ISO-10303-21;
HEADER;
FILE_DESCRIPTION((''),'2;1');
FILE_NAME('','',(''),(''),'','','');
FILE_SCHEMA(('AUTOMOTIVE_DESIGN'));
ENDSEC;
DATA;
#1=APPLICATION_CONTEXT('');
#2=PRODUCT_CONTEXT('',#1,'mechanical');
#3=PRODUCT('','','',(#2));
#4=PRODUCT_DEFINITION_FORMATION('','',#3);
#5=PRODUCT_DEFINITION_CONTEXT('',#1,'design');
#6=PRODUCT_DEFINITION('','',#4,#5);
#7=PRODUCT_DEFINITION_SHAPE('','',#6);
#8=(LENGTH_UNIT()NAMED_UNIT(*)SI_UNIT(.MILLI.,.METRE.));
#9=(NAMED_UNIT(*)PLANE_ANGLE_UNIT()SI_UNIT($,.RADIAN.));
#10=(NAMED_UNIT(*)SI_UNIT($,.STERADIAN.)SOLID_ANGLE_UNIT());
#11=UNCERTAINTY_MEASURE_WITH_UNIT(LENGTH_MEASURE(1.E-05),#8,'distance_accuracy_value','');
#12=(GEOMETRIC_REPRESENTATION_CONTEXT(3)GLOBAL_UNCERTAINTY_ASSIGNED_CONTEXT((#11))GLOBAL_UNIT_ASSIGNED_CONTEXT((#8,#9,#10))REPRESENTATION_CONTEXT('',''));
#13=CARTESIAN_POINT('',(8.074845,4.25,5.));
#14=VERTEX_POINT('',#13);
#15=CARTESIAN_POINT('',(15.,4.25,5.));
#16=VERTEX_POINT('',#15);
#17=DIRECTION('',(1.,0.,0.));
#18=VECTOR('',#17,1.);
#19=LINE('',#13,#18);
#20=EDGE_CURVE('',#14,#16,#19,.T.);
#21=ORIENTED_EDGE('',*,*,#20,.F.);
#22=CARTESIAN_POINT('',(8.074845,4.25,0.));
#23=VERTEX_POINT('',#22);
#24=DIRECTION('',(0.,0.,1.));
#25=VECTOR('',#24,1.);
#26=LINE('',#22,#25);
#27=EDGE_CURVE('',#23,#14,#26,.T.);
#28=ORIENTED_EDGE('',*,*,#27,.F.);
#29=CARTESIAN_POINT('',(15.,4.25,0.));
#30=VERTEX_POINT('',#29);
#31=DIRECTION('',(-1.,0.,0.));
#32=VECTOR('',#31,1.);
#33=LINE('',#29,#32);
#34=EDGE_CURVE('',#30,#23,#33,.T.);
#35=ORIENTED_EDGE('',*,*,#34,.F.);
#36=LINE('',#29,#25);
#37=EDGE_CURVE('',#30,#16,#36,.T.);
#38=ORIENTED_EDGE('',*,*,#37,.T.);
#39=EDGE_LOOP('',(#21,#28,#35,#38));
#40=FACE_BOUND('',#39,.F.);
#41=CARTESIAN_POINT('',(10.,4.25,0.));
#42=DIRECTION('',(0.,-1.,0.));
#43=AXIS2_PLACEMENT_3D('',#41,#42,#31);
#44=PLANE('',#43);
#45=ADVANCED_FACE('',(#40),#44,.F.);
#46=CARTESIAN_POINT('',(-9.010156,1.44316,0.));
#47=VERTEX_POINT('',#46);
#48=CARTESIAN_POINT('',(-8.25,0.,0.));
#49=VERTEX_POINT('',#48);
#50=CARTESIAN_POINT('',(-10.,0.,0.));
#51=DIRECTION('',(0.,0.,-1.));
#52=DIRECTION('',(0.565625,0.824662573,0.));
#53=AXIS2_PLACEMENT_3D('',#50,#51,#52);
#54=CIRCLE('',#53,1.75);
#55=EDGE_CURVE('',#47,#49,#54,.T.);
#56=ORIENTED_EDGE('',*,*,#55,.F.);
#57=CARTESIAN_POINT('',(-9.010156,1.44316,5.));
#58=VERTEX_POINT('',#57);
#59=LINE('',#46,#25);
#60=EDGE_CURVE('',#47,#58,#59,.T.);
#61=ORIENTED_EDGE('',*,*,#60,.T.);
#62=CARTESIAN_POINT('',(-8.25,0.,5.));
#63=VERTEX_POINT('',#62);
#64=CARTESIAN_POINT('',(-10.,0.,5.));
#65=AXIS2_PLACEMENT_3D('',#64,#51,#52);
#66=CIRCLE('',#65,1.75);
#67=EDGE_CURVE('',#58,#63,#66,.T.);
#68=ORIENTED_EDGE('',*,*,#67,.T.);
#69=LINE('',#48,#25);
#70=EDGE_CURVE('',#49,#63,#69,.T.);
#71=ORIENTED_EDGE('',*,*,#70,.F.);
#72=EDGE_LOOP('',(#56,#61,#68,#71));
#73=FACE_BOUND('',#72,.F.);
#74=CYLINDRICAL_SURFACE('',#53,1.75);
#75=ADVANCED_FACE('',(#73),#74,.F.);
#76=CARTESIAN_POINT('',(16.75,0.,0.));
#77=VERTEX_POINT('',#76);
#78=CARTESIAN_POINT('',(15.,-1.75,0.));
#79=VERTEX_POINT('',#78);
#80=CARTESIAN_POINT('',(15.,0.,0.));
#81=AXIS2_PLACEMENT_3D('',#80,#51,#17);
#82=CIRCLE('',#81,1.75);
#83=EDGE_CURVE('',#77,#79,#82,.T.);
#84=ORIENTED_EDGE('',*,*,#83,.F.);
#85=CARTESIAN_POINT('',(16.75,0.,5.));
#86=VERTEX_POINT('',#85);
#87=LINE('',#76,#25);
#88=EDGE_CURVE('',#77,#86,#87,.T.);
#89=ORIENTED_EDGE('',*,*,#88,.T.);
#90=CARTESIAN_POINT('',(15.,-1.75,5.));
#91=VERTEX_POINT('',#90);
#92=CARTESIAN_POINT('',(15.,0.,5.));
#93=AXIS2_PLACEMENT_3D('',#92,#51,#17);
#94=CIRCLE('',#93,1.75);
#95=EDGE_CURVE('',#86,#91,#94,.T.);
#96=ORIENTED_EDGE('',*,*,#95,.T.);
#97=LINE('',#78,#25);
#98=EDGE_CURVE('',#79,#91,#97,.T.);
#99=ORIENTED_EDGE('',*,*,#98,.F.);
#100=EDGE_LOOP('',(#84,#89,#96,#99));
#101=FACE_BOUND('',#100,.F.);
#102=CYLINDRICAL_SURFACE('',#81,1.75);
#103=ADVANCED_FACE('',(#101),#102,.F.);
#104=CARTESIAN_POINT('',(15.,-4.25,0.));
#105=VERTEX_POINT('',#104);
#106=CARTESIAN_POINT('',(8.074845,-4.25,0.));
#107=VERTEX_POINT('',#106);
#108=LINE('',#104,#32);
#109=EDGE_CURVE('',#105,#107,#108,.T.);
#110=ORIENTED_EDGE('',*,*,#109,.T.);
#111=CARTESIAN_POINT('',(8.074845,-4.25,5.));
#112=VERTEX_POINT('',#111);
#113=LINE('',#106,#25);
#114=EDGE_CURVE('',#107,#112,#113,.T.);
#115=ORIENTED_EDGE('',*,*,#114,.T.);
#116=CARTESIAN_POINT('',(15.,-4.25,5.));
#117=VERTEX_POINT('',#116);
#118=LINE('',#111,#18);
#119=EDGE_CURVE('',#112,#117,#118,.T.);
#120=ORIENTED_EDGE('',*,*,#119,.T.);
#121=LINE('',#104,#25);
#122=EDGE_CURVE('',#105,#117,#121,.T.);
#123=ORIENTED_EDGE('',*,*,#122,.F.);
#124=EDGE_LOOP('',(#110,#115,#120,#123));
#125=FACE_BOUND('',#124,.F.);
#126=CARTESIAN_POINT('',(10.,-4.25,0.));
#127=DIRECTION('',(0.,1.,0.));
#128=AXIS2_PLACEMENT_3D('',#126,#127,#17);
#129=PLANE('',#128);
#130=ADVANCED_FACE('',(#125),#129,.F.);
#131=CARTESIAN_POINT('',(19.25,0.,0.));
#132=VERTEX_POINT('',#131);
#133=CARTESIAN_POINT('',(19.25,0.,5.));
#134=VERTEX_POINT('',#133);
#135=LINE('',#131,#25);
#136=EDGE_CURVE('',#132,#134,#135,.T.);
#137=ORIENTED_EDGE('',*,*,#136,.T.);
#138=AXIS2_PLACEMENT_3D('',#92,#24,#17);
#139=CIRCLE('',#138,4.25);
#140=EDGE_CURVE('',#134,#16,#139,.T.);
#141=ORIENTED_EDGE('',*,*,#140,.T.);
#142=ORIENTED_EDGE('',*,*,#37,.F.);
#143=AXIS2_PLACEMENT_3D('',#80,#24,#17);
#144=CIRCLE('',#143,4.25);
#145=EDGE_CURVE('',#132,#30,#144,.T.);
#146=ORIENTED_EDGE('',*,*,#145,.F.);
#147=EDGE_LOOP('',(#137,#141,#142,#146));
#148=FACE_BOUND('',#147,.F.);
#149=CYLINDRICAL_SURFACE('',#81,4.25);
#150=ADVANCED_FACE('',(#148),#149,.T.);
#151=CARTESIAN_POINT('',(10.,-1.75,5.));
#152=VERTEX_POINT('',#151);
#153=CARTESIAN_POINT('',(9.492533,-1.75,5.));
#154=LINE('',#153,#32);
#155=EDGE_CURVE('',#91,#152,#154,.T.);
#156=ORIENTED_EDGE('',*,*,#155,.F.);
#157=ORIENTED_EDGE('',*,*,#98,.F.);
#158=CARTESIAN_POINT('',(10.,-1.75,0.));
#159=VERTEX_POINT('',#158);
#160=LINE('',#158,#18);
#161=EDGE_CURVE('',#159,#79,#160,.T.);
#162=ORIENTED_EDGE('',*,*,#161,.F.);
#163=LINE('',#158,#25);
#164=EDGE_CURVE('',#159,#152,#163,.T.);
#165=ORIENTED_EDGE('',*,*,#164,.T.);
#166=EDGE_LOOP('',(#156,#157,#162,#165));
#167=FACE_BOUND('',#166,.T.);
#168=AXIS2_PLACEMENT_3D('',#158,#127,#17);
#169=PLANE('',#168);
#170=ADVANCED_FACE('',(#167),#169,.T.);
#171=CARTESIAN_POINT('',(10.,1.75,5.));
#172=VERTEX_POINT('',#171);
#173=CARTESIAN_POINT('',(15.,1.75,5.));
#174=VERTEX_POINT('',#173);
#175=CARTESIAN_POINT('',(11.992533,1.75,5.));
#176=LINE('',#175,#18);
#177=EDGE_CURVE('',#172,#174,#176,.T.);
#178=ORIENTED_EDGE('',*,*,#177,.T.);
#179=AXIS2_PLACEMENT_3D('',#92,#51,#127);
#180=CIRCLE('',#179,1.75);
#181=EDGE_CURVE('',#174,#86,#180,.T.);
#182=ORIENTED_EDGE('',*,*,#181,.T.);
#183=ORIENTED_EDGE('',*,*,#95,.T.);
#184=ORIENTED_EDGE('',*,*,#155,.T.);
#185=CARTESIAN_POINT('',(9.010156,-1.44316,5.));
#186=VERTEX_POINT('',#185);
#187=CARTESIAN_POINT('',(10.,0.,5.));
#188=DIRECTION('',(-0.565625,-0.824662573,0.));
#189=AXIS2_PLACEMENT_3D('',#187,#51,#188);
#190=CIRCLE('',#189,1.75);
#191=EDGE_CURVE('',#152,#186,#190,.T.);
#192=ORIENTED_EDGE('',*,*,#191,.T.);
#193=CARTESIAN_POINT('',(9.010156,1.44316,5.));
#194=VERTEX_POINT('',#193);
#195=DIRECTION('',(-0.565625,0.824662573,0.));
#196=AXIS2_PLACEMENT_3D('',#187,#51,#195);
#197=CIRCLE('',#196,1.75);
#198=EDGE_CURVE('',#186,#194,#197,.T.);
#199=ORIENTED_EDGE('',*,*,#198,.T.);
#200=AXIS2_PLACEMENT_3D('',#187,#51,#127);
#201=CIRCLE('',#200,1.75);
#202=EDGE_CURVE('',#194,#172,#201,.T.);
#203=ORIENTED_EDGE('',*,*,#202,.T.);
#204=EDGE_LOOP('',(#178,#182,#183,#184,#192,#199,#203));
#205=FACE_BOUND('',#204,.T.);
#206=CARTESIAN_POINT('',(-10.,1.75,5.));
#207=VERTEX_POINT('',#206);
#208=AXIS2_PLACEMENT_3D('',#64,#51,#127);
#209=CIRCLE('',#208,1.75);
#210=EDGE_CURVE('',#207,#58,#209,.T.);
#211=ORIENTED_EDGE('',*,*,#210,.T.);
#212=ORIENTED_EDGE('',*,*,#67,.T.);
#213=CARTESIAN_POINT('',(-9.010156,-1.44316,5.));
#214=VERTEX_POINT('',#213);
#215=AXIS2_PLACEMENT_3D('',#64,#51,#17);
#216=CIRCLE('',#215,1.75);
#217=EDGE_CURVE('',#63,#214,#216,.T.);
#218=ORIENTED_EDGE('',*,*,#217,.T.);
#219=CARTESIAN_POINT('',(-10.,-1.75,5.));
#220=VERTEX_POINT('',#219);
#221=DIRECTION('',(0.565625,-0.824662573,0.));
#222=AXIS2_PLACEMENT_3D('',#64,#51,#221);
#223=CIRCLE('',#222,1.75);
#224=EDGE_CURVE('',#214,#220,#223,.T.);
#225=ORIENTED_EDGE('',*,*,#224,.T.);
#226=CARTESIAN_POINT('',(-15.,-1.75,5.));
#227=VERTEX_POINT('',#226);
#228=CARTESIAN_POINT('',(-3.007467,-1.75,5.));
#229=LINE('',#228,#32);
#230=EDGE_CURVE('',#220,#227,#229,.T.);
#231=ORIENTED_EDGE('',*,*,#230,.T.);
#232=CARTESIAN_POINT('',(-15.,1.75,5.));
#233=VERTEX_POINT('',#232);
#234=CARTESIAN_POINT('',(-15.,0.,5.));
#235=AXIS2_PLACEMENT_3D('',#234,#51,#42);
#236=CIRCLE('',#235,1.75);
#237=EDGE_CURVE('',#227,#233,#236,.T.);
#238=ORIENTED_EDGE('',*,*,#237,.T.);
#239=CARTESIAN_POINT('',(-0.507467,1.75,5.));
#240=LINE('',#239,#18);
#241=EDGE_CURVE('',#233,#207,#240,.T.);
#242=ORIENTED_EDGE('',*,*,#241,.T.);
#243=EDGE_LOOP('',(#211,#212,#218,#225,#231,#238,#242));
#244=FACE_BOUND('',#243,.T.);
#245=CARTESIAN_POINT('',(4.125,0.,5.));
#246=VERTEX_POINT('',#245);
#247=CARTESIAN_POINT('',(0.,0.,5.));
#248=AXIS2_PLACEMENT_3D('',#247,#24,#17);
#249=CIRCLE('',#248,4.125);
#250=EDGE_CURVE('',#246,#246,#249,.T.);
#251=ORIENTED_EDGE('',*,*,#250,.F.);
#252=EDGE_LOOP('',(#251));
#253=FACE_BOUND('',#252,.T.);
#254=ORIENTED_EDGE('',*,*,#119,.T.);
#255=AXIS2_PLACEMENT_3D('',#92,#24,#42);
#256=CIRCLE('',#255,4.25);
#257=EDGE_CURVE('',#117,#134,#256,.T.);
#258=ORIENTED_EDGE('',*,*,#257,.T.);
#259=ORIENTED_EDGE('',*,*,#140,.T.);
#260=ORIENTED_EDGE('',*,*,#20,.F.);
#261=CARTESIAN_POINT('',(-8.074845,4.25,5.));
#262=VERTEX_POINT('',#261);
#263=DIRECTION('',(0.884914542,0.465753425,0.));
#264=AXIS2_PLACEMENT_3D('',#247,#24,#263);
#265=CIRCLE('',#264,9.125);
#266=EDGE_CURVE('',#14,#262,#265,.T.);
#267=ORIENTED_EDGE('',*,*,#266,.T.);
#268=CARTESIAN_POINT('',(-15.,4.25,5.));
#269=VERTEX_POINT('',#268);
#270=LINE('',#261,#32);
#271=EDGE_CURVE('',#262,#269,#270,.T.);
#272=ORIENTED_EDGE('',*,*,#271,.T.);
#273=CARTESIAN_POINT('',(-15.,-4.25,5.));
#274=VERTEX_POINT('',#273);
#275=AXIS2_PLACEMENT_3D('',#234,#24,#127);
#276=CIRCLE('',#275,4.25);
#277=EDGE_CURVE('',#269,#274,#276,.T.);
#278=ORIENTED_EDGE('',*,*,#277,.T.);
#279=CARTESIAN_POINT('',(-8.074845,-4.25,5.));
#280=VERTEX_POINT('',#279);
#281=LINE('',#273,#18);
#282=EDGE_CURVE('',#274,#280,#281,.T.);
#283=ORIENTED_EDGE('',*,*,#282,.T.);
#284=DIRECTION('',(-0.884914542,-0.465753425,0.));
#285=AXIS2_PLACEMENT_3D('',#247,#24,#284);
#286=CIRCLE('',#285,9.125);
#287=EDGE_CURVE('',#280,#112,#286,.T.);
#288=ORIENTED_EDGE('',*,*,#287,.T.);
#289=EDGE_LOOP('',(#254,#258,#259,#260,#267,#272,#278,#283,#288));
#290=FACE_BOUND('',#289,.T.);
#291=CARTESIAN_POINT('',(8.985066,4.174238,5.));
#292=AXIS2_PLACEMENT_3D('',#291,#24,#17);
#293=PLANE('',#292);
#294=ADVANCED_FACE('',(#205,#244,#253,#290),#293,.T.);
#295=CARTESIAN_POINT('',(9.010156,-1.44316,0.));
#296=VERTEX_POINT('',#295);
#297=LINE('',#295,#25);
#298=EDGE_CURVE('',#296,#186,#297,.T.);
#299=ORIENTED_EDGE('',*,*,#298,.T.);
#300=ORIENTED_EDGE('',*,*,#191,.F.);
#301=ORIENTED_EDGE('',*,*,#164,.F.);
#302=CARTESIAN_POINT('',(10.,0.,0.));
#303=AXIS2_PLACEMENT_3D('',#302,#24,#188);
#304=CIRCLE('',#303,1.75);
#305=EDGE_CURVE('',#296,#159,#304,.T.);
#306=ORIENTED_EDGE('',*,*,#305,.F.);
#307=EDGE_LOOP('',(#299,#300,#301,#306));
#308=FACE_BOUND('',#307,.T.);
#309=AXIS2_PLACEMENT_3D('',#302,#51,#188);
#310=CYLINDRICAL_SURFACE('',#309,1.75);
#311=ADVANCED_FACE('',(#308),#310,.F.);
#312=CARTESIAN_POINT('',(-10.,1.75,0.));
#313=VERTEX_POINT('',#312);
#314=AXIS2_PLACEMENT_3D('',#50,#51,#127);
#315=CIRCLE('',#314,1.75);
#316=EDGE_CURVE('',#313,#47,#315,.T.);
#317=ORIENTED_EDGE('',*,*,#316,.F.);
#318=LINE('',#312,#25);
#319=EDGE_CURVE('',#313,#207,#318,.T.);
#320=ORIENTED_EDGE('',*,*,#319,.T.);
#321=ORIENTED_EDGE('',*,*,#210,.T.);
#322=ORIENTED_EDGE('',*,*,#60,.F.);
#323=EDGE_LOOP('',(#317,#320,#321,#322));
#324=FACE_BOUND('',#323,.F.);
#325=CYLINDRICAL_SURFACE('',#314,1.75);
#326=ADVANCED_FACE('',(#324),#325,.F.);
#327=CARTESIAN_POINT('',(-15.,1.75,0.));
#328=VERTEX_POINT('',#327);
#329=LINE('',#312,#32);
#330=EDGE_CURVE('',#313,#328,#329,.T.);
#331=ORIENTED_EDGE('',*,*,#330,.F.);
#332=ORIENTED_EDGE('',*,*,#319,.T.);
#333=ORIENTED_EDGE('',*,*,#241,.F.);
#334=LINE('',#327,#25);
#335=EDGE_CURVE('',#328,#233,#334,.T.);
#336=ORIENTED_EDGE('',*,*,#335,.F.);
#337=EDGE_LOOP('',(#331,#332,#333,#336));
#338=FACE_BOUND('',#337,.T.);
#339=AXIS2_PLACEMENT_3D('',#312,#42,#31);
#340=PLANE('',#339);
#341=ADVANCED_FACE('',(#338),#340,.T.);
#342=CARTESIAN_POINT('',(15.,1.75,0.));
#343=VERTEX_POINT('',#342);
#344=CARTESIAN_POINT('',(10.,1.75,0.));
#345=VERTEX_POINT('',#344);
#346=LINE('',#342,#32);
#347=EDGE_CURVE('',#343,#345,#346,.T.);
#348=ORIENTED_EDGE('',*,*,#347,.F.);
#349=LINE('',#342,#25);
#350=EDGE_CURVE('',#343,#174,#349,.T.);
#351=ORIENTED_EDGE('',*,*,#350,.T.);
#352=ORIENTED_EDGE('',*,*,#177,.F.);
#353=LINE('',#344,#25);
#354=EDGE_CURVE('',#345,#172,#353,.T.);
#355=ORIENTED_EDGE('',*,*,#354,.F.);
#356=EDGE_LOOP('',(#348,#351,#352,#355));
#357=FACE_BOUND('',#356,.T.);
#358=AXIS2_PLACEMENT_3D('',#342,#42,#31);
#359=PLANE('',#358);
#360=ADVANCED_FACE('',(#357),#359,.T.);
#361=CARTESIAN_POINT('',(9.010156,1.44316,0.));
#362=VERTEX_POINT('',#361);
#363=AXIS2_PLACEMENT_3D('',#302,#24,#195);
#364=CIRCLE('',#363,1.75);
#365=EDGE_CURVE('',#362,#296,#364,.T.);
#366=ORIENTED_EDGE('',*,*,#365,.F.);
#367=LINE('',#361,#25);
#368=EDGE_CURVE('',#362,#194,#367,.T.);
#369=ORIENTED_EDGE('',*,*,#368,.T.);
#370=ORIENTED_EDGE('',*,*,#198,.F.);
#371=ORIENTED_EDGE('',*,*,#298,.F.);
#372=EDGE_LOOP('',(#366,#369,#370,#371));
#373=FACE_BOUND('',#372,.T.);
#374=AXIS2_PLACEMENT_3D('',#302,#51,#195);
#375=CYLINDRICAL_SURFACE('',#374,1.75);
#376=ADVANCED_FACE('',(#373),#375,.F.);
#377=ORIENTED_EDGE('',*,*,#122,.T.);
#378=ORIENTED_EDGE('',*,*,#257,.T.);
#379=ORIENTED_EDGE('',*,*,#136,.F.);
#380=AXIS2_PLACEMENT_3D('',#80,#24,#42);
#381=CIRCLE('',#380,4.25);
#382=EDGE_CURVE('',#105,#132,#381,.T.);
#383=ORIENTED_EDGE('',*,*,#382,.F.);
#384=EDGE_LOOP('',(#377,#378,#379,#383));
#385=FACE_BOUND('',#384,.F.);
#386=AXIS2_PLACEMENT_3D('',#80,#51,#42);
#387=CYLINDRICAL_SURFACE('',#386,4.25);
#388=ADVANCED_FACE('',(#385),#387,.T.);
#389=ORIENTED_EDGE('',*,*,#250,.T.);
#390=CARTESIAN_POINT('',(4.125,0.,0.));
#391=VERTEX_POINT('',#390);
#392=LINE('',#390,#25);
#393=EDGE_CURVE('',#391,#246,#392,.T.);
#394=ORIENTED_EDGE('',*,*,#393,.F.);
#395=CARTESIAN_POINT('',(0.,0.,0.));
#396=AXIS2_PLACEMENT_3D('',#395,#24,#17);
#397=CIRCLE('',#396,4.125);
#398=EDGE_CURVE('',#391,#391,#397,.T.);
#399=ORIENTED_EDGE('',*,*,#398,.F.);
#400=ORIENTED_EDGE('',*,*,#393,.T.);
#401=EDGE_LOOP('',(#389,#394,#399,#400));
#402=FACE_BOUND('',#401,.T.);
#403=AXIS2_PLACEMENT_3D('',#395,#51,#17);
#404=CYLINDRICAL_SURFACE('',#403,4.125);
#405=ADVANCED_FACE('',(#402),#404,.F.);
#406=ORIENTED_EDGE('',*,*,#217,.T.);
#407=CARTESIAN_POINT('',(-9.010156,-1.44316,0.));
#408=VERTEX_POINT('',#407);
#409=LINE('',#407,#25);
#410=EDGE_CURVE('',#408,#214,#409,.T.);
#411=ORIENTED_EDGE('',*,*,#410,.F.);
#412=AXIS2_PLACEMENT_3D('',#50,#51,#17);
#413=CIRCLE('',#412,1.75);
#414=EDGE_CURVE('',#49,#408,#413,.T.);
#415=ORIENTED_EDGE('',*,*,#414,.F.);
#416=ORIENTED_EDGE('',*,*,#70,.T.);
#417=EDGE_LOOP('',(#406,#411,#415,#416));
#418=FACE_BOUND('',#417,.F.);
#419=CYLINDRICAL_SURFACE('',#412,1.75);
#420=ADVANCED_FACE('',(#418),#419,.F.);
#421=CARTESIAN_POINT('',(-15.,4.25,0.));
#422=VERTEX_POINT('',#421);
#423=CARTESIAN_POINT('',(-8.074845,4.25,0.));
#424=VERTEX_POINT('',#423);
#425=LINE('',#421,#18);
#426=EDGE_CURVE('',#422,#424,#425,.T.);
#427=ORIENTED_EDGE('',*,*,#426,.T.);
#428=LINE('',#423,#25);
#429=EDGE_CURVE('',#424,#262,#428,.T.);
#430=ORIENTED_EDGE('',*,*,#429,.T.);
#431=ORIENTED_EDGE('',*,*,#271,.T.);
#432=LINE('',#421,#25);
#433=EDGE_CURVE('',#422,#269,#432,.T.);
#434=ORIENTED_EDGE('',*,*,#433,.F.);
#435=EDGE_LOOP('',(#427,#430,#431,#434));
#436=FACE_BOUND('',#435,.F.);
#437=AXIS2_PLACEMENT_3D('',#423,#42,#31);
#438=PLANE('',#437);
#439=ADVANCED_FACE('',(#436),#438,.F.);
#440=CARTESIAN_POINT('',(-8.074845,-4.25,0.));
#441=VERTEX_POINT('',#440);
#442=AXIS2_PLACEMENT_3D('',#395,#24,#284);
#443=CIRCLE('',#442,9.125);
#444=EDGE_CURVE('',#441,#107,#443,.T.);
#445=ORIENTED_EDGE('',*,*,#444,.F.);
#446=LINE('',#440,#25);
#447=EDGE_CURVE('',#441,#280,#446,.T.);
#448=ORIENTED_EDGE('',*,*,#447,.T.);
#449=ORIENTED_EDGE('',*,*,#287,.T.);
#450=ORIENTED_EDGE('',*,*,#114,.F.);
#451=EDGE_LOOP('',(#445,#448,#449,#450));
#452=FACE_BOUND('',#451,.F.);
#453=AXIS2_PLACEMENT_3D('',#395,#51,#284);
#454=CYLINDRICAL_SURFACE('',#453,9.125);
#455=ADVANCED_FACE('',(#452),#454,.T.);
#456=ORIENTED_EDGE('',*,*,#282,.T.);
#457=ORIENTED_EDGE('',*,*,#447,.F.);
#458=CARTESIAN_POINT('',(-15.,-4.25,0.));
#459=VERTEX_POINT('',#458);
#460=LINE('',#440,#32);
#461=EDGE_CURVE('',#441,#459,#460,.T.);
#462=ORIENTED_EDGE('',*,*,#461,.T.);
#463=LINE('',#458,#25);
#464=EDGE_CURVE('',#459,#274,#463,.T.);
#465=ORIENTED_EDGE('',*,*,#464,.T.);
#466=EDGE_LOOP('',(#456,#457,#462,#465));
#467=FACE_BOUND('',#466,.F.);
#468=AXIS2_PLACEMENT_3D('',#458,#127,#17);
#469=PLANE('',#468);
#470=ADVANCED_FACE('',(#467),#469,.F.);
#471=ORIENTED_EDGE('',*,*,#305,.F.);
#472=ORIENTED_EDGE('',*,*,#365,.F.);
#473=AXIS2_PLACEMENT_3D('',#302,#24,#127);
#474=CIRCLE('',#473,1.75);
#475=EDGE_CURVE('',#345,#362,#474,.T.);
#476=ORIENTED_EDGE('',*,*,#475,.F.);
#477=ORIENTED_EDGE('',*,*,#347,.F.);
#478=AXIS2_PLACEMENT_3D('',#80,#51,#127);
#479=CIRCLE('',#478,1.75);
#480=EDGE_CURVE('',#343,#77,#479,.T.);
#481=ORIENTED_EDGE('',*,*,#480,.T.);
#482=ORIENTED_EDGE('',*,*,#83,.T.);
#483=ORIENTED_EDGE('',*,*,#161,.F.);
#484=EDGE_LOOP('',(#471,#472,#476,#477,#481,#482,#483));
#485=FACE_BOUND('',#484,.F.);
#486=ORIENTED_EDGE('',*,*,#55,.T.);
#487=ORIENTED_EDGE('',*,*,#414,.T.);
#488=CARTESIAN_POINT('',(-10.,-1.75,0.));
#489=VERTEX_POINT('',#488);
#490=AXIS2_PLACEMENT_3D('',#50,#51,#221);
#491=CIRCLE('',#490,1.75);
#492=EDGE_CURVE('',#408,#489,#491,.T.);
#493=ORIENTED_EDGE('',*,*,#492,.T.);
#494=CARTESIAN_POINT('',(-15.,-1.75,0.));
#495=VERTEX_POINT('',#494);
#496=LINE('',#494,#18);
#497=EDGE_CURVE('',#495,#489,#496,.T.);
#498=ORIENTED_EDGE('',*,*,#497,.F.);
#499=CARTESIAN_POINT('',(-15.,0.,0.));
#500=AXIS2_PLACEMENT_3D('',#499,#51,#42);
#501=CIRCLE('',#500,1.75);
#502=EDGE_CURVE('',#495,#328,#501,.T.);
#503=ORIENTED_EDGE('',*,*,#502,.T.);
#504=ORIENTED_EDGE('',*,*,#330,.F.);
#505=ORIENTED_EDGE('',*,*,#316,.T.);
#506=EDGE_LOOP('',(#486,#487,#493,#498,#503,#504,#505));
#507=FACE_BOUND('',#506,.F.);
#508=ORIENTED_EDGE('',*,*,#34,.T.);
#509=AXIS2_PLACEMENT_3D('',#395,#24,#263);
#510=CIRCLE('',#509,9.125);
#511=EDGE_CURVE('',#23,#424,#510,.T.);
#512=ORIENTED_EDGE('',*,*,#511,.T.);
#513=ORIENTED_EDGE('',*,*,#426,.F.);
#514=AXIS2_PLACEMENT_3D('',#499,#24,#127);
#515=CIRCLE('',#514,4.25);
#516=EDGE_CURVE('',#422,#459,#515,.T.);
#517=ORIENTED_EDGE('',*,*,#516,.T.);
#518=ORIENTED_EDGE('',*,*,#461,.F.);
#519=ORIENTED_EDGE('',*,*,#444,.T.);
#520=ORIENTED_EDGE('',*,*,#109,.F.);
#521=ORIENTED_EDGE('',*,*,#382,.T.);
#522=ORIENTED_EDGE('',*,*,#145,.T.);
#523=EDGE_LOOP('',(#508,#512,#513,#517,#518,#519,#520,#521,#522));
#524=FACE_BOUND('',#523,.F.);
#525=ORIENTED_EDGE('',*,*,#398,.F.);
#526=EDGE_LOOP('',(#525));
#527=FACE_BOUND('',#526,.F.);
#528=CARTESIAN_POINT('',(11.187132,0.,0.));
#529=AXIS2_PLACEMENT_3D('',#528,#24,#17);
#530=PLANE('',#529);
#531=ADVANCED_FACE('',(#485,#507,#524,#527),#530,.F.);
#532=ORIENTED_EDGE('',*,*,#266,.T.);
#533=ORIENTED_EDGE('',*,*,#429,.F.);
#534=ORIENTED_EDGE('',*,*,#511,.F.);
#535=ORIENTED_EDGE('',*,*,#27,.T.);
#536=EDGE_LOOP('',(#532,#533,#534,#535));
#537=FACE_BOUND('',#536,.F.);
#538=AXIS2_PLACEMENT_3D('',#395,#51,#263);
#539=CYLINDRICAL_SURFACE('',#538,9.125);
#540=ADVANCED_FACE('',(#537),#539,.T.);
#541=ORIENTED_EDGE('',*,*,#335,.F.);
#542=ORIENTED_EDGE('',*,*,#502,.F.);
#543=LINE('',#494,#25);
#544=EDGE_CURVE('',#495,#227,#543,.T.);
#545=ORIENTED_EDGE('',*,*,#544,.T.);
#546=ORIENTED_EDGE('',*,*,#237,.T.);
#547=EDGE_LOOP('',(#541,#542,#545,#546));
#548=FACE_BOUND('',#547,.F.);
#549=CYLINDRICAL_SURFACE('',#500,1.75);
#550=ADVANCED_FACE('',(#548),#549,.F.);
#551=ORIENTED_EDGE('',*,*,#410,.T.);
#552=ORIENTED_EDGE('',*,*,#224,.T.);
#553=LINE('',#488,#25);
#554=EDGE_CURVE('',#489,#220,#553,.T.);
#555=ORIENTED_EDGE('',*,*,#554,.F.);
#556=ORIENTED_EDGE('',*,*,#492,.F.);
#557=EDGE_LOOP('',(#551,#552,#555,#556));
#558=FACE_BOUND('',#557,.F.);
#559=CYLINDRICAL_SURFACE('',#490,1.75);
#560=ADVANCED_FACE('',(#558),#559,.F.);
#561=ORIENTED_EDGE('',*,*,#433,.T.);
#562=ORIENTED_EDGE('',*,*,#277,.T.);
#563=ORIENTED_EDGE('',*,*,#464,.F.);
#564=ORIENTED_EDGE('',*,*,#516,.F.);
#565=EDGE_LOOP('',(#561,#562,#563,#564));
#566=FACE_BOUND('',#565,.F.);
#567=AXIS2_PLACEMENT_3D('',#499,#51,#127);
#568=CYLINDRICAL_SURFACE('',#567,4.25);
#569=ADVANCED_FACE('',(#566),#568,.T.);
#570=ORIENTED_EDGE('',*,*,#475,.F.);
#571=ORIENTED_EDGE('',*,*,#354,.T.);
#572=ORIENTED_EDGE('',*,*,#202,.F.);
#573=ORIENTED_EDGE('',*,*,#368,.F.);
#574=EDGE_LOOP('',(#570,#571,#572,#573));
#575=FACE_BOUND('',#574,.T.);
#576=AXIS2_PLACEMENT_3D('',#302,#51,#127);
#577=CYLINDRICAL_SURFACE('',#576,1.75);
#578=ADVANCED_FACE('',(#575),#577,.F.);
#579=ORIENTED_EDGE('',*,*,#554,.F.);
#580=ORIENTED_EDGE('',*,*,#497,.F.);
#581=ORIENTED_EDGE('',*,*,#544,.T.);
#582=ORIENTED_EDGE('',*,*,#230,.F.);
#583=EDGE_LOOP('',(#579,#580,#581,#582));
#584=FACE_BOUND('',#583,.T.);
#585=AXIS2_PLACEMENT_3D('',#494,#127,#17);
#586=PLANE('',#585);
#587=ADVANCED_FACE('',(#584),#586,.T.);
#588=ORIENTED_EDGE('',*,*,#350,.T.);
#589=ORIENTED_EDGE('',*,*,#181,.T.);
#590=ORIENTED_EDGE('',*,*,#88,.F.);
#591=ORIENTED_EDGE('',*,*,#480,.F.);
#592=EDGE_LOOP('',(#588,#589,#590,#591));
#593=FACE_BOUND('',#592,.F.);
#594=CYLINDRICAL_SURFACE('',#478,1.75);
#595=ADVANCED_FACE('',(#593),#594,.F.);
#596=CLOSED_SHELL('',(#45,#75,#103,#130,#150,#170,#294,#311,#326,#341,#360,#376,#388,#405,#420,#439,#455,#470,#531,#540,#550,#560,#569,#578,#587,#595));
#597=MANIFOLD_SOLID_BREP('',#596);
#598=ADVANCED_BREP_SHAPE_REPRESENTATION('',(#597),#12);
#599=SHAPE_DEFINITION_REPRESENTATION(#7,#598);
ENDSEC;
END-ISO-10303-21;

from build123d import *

# Parameters (mm, degrees)
F0_R     = 4.125
F1_DEPTH = 5
F2_DEPTH = 5
F3_DEPTH = 5
F4_DEPTH = 5
F5_DEPTH = 25
F6_DEPTH = 25


with BuildPart() as f1:
    # F0 (on Top) → F1 (new body)
    with BuildSketch(Plane.XY):
        with BuildLine():
            Line((-8.0748451998, 4.25), (8.0748451998, 4.25))
            ThreePointArc((8.0748451998, 4.25), (0, 9.125), (-8.0748451998, 4.25))
        make_face()
        with BuildLine():
            ThreePointArc((8.26015625, -3.8775564117), (5.75, 0), (8.26015625, 3.8775564117))
            ThreePointArc((8.26015625, 3.8775564117), (8.1696234092, 4.0648343573), (8.0748451998, 4.25))
            Line((8.0748451998, 4.25), (-8.0748451998, 4.25))
            ThreePointArc((-8.0748451998, 4.25), (-8.1696234092, 4.0648343573), (-8.26015625, 3.8775564117))
            ThreePointArc((-8.26015625, 3.8775564117), (-6.4323091545, 2.3095631689), (-5.75, 0))
            ThreePointArc((-5.75, 0), (-6.4323091545, -2.3095631689), (-8.26015625, -3.8775564117))
            ThreePointArc((-8.26015625, -3.8775564117), (-8.1696234092, -4.0648343573), (-8.0748451998, -4.25))
            Line((-8.0748451998, -4.25), (8.0748451998, -4.25))
            ThreePointArc((8.0748451998, -4.25), (8.1696234092, -4.0648343573), (8.26015625, -3.8775564117))
        make_face()
        Circle(F0_R, mode=Mode.SUBTRACT)
        with BuildLine():
            ThreePointArc((-8.0748451998, -4.25), (0, -9.125), (8.0748451998, -4.25))
            Line((8.0748451998, -4.25), (-8.0748451998, -4.25))
        make_face()
        with BuildLine():
            ThreePointArc((-5.75, 0), (-6.4323091545, 2.3095631689), (-8.26015625, 3.8775564117))
            ThreePointArc((-8.26015625, 3.8775564117), (-8.7205215176, 2.6866576746), (-9.01015625, 1.4431595028))
            ThreePointArc((-9.01015625, 1.4431595028), (-8.4516578927, 0.8155591449), (-8.25, 0))
            ThreePointArc((-8.25, 0), (-8.4516578927, -0.8155591449), (-9.01015625, -1.4431595028))
            ThreePointArc((-9.01015625, -1.4431595028), (-8.7205215176, -2.6866576746), (-8.26015625, -3.8775564117))
            ThreePointArc((-8.26015625, -3.8775564117), (-6.4323091545, -2.3095631689), (-5.75, 0))
        make_face()
        with BuildLine():
            ThreePointArc((-9.01015625, 1.4431595028), (-8.7205215176, 2.6866576746), (-8.26015625, 3.8775564117))
            ThreePointArc((-8.26015625, 3.8775564117), (-9.1103693883, 4.1558461683), (-10, 4.25))
            ThreePointArc((-10, 4.25), (-11.3144466464, 4.041624675), (-12.5, 3.4369317712))
            ThreePointArc((-12.5, 3.4369317712), (-11.703765196, 2.6827851418), (-11.1270166538, 1.75))
            Line((-11.1270166538, 1.75), (-10, 1.75))
            ThreePointArc((-10, 1.75), (-9.4818441981, 1.6715306055), (-9.01015625, 1.4431595028))
        make_face()
        with BuildLine():
            ThreePointArc((-12.5, 3.4369317712), (-11.3144466464, 4.041624675), (-10, 4.25))
            Line((-10, 4.25), (-15, 4.25))
            ThreePointArc((-15, 4.25), (-13.6855533536, 4.041624675), (-12.5, 3.4369317712))
        make_face()
        with BuildLine():
            ThreePointArc((-13.8729833462, 1.75), (-13.296234804, 2.6827851418), (-12.5, 3.4369317712))
            ThreePointArc((-12.5, 3.4369317712), (-13.6855533536, 4.041624675), (-15, 4.25))
            Line((-15, 4.25), (-15, 1.75))
            Line((-15, 1.75), (-13.8729833462, 1.75))
        make_face()
        with BuildLine():
            Line((-15, 1.75), (-15, 4.25))
            ThreePointArc((-15, 4.25), (-19.25, 0), (-15, -4.25))
            Line((-15, -4.25), (-15, -1.75))
            ThreePointArc((-15, -1.75), (-16.75, 0), (-15, 1.75))
        make_face()
        with BuildLine():
            ThreePointArc((-11.1270166538, 1.75), (-11.703765196, 2.6827851418), (-12.5, 3.4369317712))
            ThreePointArc((-12.5, 3.4369317712), (-13.296234804, 2.6827851418), (-13.8729833462, 1.75))
            Line((-13.8729833462, 1.75), (-11.1270166538, 1.75))
        make_face()
        with BuildLine():
            ThreePointArc((-11, 1.4361406616), (-11.0603815396, 1.5943357195), (-11.1270166538, 1.75))
            Line((-11.1270166538, 1.75), (-13.8729833462, 1.75))
            ThreePointArc((-13.8729833462, 1.75), (-13.9396184604, 1.5943357195), (-14, 1.4361406616))
            ThreePointArc((-14, 1.4361406616), (-13.4487907943, 0.8100925873), (-13.25, 0))
            ThreePointArc((-13.25, 0), (-13.4487907943, -0.8100925873), (-14, -1.4361406616))
            ThreePointArc((-14, -1.4361406616), (-13.9396184604, -1.5943357195), (-13.8729833462, -1.75))
            Line((-13.8729833462, -1.75), (-11.1270166538, -1.75))
            ThreePointArc((-11.1270166538, -1.75), (-11.0603815396, -1.5943357195), (-11, -1.4361406616))
            ThreePointArc((-11, -1.4361406616), (-11.75, 0), (-11, 1.4361406616))
        make_face()
        with BuildLine():
            ThreePointArc((-15, -4.25), (-13.6855533536, -4.041624675), (-12.5, -3.4369317712))
            ThreePointArc((-12.5, -3.4369317712), (-13.296234804, -2.6827851418), (-13.8729833462, -1.75))
            Line((-13.8729833462, -1.75), (-15, -1.75))
            Line((-15, -1.75), (-15, -4.25))
        make_face()
        with BuildLine():
            ThreePointArc((-13.8729833462, -1.75), (-13.296234804, -2.6827851418), (-12.5, -3.4369317712))
            ThreePointArc((-12.5, -3.4369317712), (-11.703765196, -2.6827851418), (-11.1270166538, -1.75))
            Line((-11.1270166538, -1.75), (-13.8729833462, -1.75))
        make_face()
        with BuildLine():
            ThreePointArc((-10, -4.25), (-9.1103693883, -4.1558461683), (-8.26015625, -3.8775564117))
            ThreePointArc((-8.26015625, -3.8775564117), (-8.7205215176, -2.6866576746), (-9.01015625, -1.4431595028))
            ThreePointArc((-9.01015625, -1.4431595028), (-9.4818441981, -1.6715306055), (-10, -1.75))
            Line((-10, -1.75), (-11.1270166538, -1.75))
            ThreePointArc((-11.1270166538, -1.75), (-11.703765196, -2.6827851418), (-12.5, -3.4369317712))
            ThreePointArc((-12.5, -3.4369317712), (-11.3144466464, -4.041624675), (-10, -4.25))
        make_face()
        with BuildLine():
            Line((-15, -4.25), (-10, -4.25))
            ThreePointArc((-10, -4.25), (-11.3144466464, -4.041624675), (-12.5, -3.4369317712))
            ThreePointArc((-12.5, -3.4369317712), (-13.6855533536, -4.041624675), (-15, -4.25))
        make_face()
        with BuildLine():
            ThreePointArc((-14, 1.4361406616), (-13.9396184604, 1.5943357195), (-13.8729833462, 1.75))
            Line((-13.8729833462, 1.75), (-15, 1.75))
            ThreePointArc((-15, 1.75), (-14.4759514134, 1.6696925103), (-14, 1.4361406616))
        make_face()
        with BuildLine():
            ThreePointArc((-11, 1.4361406616), (-10.5240485866, 1.6696925103), (-10, 1.75))
            Line((-10, 1.75), (-11.1270166538, 1.75))
            ThreePointArc((-11.1270166538, 1.75), (-11.0603815396, 1.5943357195), (-11, 1.4361406616))
        make_face()
        with BuildLine():
            Line((-15, -1.75), (-13.8729833462, -1.75))
            ThreePointArc((-13.8729833462, -1.75), (-13.9396184604, -1.5943357195), (-14, -1.4361406616))
            ThreePointArc((-14, -1.4361406616), (-14.4759514134, -1.6696925103), (-15, -1.75))
        make_face()
        with BuildLine():
            Line((-11.1270166538, -1.75), (-10, -1.75))
            ThreePointArc((-10, -1.75), (-10.5240485866, -1.6696925103), (-11, -1.4361406616))
            ThreePointArc((-11, -1.4361406616), (-11.0603815396, -1.5943357195), (-11.1270166538, -1.75))
        make_face()
    extrude(amount=F1_DEPTH)



with BuildPart() as f1b:
    # F0 (on Top) → F1, piece 2 (new body)
    with BuildSketch(Plane.XY):
        with BuildLine():
            Line((15, 4.25), (15, 1.75))
            ThreePointArc((15, 1.75), (16.2374368671, 1.2374368671), (16.75, 0))
            ThreePointArc((16.75, 0), (16.2374368671, -1.2374368671), (15, -1.75))
            Line((15, -1.75), (15, -4.25))
            ThreePointArc((15, -4.25), (18.00520382, -3.00520382), (19.25, 0))
            ThreePointArc((19.25, 0), (18.00520382, 3.00520382), (15, 4.25))
        make_face()
    extrude(amount=F1_DEPTH)


with BuildPart() as f1c:
    # F0 (on Top) → F1, piece 3 (new body)
    with BuildSketch(Plane.XY):
        with BuildLine():
            ThreePointArc((12.5, 3.4369317712), (11.703765196, 2.6827851418), (11.1270166538, 1.75))
            Line((11.1270166538, 1.75), (13.8729833462, 1.75))
            ThreePointArc((13.8729833462, 1.75), (13.296234804, 2.6827851418), (12.5, 3.4369317712))
        make_face()
        with BuildLine():
            ThreePointArc((11, 1.4361406616), (11.5512092057, 0.8100925873), (11.75, 0))
            ThreePointArc((11.75, 0), (11.5512092057, -0.8100925873), (11, -1.4361406616))
            ThreePointArc((11, -1.4361406616), (11.0603815396, -1.5943357195), (11.1270166538, -1.75))
            Line((11.1270166538, -1.75), (13.8729833462, -1.75))
            ThreePointArc((13.8729833462, -1.75), (13.9396184604, -1.5943357195), (14, -1.4361406616))
            ThreePointArc((14, -1.4361406616), (13.25, 0), (14, 1.4361406616))
            ThreePointArc((14, 1.4361406616), (13.9396184604, 1.5943357195), (13.8729833462, 1.75))
            Line((13.8729833462, 1.75), (11.1270166538, 1.75))
            ThreePointArc((11.1270166538, 1.75), (11.0603815396, 1.5943357195), (11, 1.4361406616))
        make_face()
        with BuildLine():
            ThreePointArc((14, -1.4361406616), (13.9396184604, -1.5943357195), (13.8729833462, -1.75))
            Line((13.8729833462, -1.75), (15, -1.75))
            ThreePointArc((15, -1.75), (14.4759514134, -1.6696925103), (14, -1.4361406616))
        make_face()
        with BuildLine():
            Line((15, 1.75), (13.8729833462, 1.75))
            ThreePointArc((13.8729833462, 1.75), (13.9396184604, 1.5943357195), (14, 1.4361406616))
            ThreePointArc((14, 1.4361406616), (14.4759514134, 1.6696925103), (15, 1.75))
        make_face()
    extrude(amount=F1_DEPTH)


with BuildPart() as f1_1:
    add(f1.part)

    add(f1b.part)  # F2 merges F1b

    add(f1c.part)  # F2 merges F1c
    # F0 (on Top) → F2 (join)
    with BuildSketch(Plane.XY):
        with BuildLine():
            ThreePointArc((12.5, 3.4369317712), (13.296234804, 2.6827851418), (13.8729833462, 1.75))
            Line((13.8729833462, 1.75), (15, 1.75))
            Line((15, 1.75), (15, 4.25))
            ThreePointArc((15, 4.25), (13.6855533536, 4.041624675), (12.5, 3.4369317712))
        make_face()
        with BuildLine():
            ThreePointArc((10, 4.25), (11.3144466464, 4.041624675), (12.5, 3.4369317712))
            ThreePointArc((12.5, 3.4369317712), (13.6855533536, 4.041624675), (15, 4.25))
            Line((15, 4.25), (10, 4.25))
        make_face()
        with BuildLine():
            ThreePointArc((9.01015625, 1.4431595028), (9.4818441981, 1.6715306055), (10, 1.75))
            Line((10, 1.75), (11.1270166538, 1.75))
            ThreePointArc((11.1270166538, 1.75), (11.703765196, 2.6827851418), (12.5, 3.4369317712))
            ThreePointArc((12.5, 3.4369317712), (11.3144466464, 4.041624675), (10, 4.25))
            ThreePointArc((10, 4.25), (9.1103693883, 4.1558461683), (8.26015625, 3.8775564117))
            ThreePointArc((8.26015625, 3.8775564117), (8.7205215176, 2.6866576746), (9.01015625, 1.4431595028))
        make_face()
        with BuildLine():
            ThreePointArc((9.01015625, -1.4431595028), (8.25, 0), (9.01015625, 1.4431595028))
            ThreePointArc((9.01015625, 1.4431595028), (8.7205215176, 2.6866576746), (8.26015625, 3.8775564117))
            ThreePointArc((8.26015625, 3.8775564117), (5.75, 0), (8.26015625, -3.8775564117))
            ThreePointArc((8.26015625, -3.8775564117), (8.7205215176, -2.6866576746), (9.01015625, -1.4431595028))
        make_face()
        with BuildLine():
            Line((15, -1.75), (13.8729833462, -1.75))
            ThreePointArc((13.8729833462, -1.75), (13.296234804, -2.6827851418), (12.5, -3.4369317712))
            ThreePointArc((12.5, -3.4369317712), (13.6855533536, -4.041624675), (15, -4.25))
            Line((15, -4.25), (15, -1.75))
        make_face()
        with BuildLine():
            ThreePointArc((15, -4.25), (13.6855533536, -4.041624675), (12.5, -3.4369317712))
            ThreePointArc((12.5, -3.4369317712), (11.3144466464, -4.041624675), (10, -4.25))
            Line((10, -4.25), (15, -4.25))
        make_face()
        with BuildLine():
            Line((11.1270166538, -1.75), (10, -1.75))
            ThreePointArc((10, -1.75), (9.4818441981, -1.6715306055), (9.01015625, -1.4431595028))
            ThreePointArc((9.01015625, -1.4431595028), (8.7205215176, -2.6866576746), (8.26015625, -3.8775564117))
            ThreePointArc((8.26015625, -3.8775564117), (9.1103693883, -4.1558461683), (10, -4.25))
            ThreePointArc((10, -4.25), (11.3144466464, -4.041624675), (12.5, -3.4369317712))
            ThreePointArc((12.5, -3.4369317712), (11.703765196, -2.6827851418), (11.1270166538, -1.75))
        make_face()
        with BuildLine():
            Line((13.8729833462, -1.75), (11.1270166538, -1.75))
            ThreePointArc((11.1270166538, -1.75), (11.703765196, -2.6827851418), (12.5, -3.4369317712))
            ThreePointArc((12.5, -3.4369317712), (13.296234804, -2.6827851418), (13.8729833462, -1.75))
        make_face()
        with BuildLine():
            ThreePointArc((10, 1.75), (10.5240485866, 1.6696925103), (11, 1.4361406616))
            ThreePointArc((11, 1.4361406616), (11.0603815396, 1.5943357195), (11.1270166538, 1.75))
            Line((11.1270166538, 1.75), (10, 1.75))
        make_face()
        with BuildLine():
            ThreePointArc((11.1270166538, -1.75), (11.0603815396, -1.5943357195), (11, -1.4361406616))
            ThreePointArc((11, -1.4361406616), (10.5240485866, -1.6696925103), (10, -1.75))
            Line((10, -1.75), (11.1270166538, -1.75))
        make_face()
    extrude(amount=F2_DEPTH)

    # F0 (on Top) → F3 (join)
    with BuildSketch(Plane.XY):
        with BuildLine():
            ThreePointArc((8.0748451998, 4.25), (8.1696234092, 4.0648343573), (8.26015625, 3.8775564117))
            ThreePointArc((8.26015625, 3.8775564117), (9.1103693883, 4.1558461683), (10, 4.25))
            Line((10, 4.25), (8.0748451998, 4.25))
        make_face()
        with BuildLine():
            ThreePointArc((10, -4.25), (9.1103693883, -4.1558461683), (8.26015625, -3.8775564117))
            ThreePointArc((8.26015625, -3.8775564117), (8.1696234092, -4.0648343573), (8.0748451998, -4.25))
            Line((8.0748451998, -4.25), (10, -4.25))
        make_face()
        with BuildLine():
            Line((-10, -4.25), (-8.0748451998, -4.25))
            ThreePointArc((-8.0748451998, -4.25), (-8.1696234092, -4.0648343573), (-8.26015625, -3.8775564117))
            ThreePointArc((-8.26015625, -3.8775564117), (-9.1103693883, -4.1558461683), (-10, -4.25))
        make_face()
        with BuildLine():
            ThreePointArc((-8.26015625, 3.8775564117), (-8.1696234092, 4.0648343573), (-8.0748451998, 4.25))
            Line((-8.0748451998, 4.25), (-10, 4.25))
            ThreePointArc((-10, 4.25), (-9.1103693883, 4.1558461683), (-8.26015625, 3.8775564117))
        make_face()
    extrude(amount=F3_DEPTH)

    # F0 (on Top) → F4 (join)
    with BuildSketch(Plane.XY):
        with BuildLine():
            ThreePointArc((11, -1.4361406616), (11.5512092057, -0.8100925873), (11.75, 0))
            ThreePointArc((11.75, 0), (11.5512092057, 0.8100925873), (11, 1.4361406616))
            ThreePointArc((11, 1.4361406616), (10.75, 0), (11, -1.4361406616))
        make_face()
        with BuildLine():
            Line((10, -1.75), (10, 1.75))
            ThreePointArc((10, 1.75), (9.4818441981, 1.6715306055), (9.01015625, 1.4431595028))
            ThreePointArc((9.01015625, 1.4431595028), (9.0962437517, 0.7238609047), (9.125, 0))
            ThreePointArc((9.125, 0), (9.0962437517, -0.7238609047), (9.01015625, -1.4431595028))
            ThreePointArc((9.01015625, -1.4431595028), (9.4818441981, -1.6715306055), (10, -1.75))
        make_face()
        with BuildLine():
            ThreePointArc((9.125, 0), (9.0962437517, 0.7238609047), (9.01015625, 1.4431595028))
            ThreePointArc((9.01015625, 1.4431595028), (8.25, 0), (9.01015625, -1.4431595028))
            ThreePointArc((9.01015625, -1.4431595028), (9.0962437517, -0.7238609047), (9.125, 0))
        make_face()
        with BuildLine():
            ThreePointArc((11, -1.4361406616), (10.75, 0), (11, 1.4361406616))
            ThreePointArc((11, 1.4361406616), (10.5240485866, 1.6696925103), (10, 1.75))
            Line((10, 1.75), (10, -1.75))
            ThreePointArc((10, -1.75), (10.5240485866, -1.6696925103), (11, -1.4361406616))
        make_face()
    extrude(amount=F4_DEPTH)

    # F0 (on Top) → F5 (cut)
    with BuildSketch(Plane.XY):
        with BuildLine():
            ThreePointArc((-11, 1.4361406616), (-11.0603815396, 1.5943357195), (-11.1270166538, 1.75))
            Line((-11.1270166538, 1.75), (-13.8729833462, 1.75))
            ThreePointArc((-13.8729833462, 1.75), (-13.9396184604, 1.5943357195), (-14, 1.4361406616))
            ThreePointArc((-14, 1.4361406616), (-13.4487907943, 0.8100925873), (-13.25, 0))
            ThreePointArc((-13.25, 0), (-13.4487907943, -0.8100925873), (-14, -1.4361406616))
            ThreePointArc((-14, -1.4361406616), (-13.9396184604, -1.5943357195), (-13.8729833462, -1.75))
            Line((-13.8729833462, -1.75), (-11.1270166538, -1.75))
            ThreePointArc((-11.1270166538, -1.75), (-11.0603815396, -1.5943357195), (-11, -1.4361406616))
            ThreePointArc((-11, -1.4361406616), (-11.75, 0), (-11, 1.4361406616))
        make_face()
        with BuildLine():
            Line((-15, -1.75), (-13.8729833462, -1.75))
            ThreePointArc((-13.8729833462, -1.75), (-13.9396184604, -1.5943357195), (-14, -1.4361406616))
            ThreePointArc((-14, -1.4361406616), (-14.4759514134, -1.6696925103), (-15, -1.75))
        make_face()
        with BuildLine():
            ThreePointArc((-14, 1.4361406616), (-13.9396184604, 1.5943357195), (-13.8729833462, 1.75))
            Line((-13.8729833462, 1.75), (-15, 1.75))
            ThreePointArc((-15, 1.75), (-14.4759514134, 1.6696925103), (-14, 1.4361406616))
        make_face()
        with BuildLine():
            ThreePointArc((-11, 1.4361406616), (-10.5240485866, 1.6696925103), (-10, 1.75))
            Line((-10, 1.75), (-11.1270166538, 1.75))
            ThreePointArc((-11.1270166538, 1.75), (-11.0603815396, 1.5943357195), (-11, 1.4361406616))
        make_face()
        with BuildLine():
            Line((-11.1270166538, -1.75), (-10, -1.75))
            ThreePointArc((-10, -1.75), (-10.5240485866, -1.6696925103), (-11, -1.4361406616))
            ThreePointArc((-11, -1.4361406616), (-11.0603815396, -1.5943357195), (-11.1270166538, -1.75))
        make_face()
    extrude(amount=F5_DEPTH, mode=Mode.SUBTRACT)

    # F0 (on Top) → F6 (cut)
    with BuildSketch(Plane.XY):
        with BuildLine():
            ThreePointArc((9.125, 0), (9.0962437517, 0.7238609047), (9.01015625, 1.4431595028))
            ThreePointArc((9.01015625, 1.4431595028), (8.25, 0), (9.01015625, -1.4431595028))
            ThreePointArc((9.01015625, -1.4431595028), (9.0962437517, -0.7238609047), (9.125, 0))
        make_face()
        with BuildLine():
            Line((10, -1.75), (10, 1.75))
            ThreePointArc((10, 1.75), (9.4818441981, 1.6715306055), (9.01015625, 1.4431595028))
            ThreePointArc((9.01015625, 1.4431595028), (9.0962437517, 0.7238609047), (9.125, 0))
            ThreePointArc((9.125, 0), (9.0962437517, -0.7238609047), (9.01015625, -1.4431595028))
            ThreePointArc((9.01015625, -1.4431595028), (9.4818441981, -1.6715306055), (10, -1.75))
        make_face()
        with BuildLine():
            ThreePointArc((11, -1.4361406616), (10.75, 0), (11, 1.4361406616))
            ThreePointArc((11, 1.4361406616), (10.5240485866, 1.6696925103), (10, 1.75))
            Line((10, 1.75), (10, -1.75))
            ThreePointArc((10, -1.75), (10.5240485866, -1.6696925103), (11, -1.4361406616))
        make_face()
        with BuildLine():
            ThreePointArc((11, -1.4361406616), (11.5512092057, -0.8100925873), (11.75, 0))
            ThreePointArc((11.75, 0), (11.5512092057, 0.8100925873), (11, 1.4361406616))
            ThreePointArc((11, 1.4361406616), (10.75, 0), (11, -1.4361406616))
        make_face()
        with BuildLine():
            ThreePointArc((11.1270166538, -1.75), (11.0603815396, -1.5943357195), (11, -1.4361406616))
            ThreePointArc((11, -1.4361406616), (10.5240485866, -1.6696925103), (10, -1.75))
            Line((10, -1.75), (11.1270166538, -1.75))
        make_face()
        with BuildLine():
            ThreePointArc((10, 1.75), (10.5240485866, 1.6696925103), (11, 1.4361406616))
            ThreePointArc((11, 1.4361406616), (11.0603815396, 1.5943357195), (11.1270166538, 1.75))
            Line((11.1270166538, 1.75), (10, 1.75))
        make_face()
        with BuildLine():
            ThreePointArc((14, -1.4361406616), (13.9396184604, -1.5943357195), (13.8729833462, -1.75))
            Line((13.8729833462, -1.75), (15, -1.75))
            ThreePointArc((15, -1.75), (14.4759514134, -1.6696925103), (14, -1.4361406616))
        make_face()
        with BuildLine():
            Line((15, 1.75), (13.8729833462, 1.75))
            ThreePointArc((13.8729833462, 1.75), (13.9396184604, 1.5943357195), (14, 1.4361406616))
            ThreePointArc((14, 1.4361406616), (14.4759514134, 1.6696925103), (15, 1.75))
        make_face()
        with BuildLine():
            ThreePointArc((11, 1.4361406616), (11.5512092057, 0.8100925873), (11.75, 0))
            ThreePointArc((11.75, 0), (11.5512092057, -0.8100925873), (11, -1.4361406616))
            ThreePointArc((11, -1.4361406616), (11.0603815396, -1.5943357195), (11.1270166538, -1.75))
            Line((11.1270166538, -1.75), (13.8729833462, -1.75))
            ThreePointArc((13.8729833462, -1.75), (13.9396184604, -1.5943357195), (14, -1.4361406616))
            ThreePointArc((14, -1.4361406616), (13.25, 0), (14, 1.4361406616))
            ThreePointArc((14, 1.4361406616), (13.9396184604, 1.5943357195), (13.8729833462, 1.75))
            Line((13.8729833462, 1.75), (11.1270166538, 1.75))
            ThreePointArc((11.1270166538, 1.75), (11.0603815396, 1.5943357195), (11, 1.4361406616))
        make_face()
    extrude(amount=F6_DEPTH, mode=Mode.SUBTRACT)


solid = f1_1.part
